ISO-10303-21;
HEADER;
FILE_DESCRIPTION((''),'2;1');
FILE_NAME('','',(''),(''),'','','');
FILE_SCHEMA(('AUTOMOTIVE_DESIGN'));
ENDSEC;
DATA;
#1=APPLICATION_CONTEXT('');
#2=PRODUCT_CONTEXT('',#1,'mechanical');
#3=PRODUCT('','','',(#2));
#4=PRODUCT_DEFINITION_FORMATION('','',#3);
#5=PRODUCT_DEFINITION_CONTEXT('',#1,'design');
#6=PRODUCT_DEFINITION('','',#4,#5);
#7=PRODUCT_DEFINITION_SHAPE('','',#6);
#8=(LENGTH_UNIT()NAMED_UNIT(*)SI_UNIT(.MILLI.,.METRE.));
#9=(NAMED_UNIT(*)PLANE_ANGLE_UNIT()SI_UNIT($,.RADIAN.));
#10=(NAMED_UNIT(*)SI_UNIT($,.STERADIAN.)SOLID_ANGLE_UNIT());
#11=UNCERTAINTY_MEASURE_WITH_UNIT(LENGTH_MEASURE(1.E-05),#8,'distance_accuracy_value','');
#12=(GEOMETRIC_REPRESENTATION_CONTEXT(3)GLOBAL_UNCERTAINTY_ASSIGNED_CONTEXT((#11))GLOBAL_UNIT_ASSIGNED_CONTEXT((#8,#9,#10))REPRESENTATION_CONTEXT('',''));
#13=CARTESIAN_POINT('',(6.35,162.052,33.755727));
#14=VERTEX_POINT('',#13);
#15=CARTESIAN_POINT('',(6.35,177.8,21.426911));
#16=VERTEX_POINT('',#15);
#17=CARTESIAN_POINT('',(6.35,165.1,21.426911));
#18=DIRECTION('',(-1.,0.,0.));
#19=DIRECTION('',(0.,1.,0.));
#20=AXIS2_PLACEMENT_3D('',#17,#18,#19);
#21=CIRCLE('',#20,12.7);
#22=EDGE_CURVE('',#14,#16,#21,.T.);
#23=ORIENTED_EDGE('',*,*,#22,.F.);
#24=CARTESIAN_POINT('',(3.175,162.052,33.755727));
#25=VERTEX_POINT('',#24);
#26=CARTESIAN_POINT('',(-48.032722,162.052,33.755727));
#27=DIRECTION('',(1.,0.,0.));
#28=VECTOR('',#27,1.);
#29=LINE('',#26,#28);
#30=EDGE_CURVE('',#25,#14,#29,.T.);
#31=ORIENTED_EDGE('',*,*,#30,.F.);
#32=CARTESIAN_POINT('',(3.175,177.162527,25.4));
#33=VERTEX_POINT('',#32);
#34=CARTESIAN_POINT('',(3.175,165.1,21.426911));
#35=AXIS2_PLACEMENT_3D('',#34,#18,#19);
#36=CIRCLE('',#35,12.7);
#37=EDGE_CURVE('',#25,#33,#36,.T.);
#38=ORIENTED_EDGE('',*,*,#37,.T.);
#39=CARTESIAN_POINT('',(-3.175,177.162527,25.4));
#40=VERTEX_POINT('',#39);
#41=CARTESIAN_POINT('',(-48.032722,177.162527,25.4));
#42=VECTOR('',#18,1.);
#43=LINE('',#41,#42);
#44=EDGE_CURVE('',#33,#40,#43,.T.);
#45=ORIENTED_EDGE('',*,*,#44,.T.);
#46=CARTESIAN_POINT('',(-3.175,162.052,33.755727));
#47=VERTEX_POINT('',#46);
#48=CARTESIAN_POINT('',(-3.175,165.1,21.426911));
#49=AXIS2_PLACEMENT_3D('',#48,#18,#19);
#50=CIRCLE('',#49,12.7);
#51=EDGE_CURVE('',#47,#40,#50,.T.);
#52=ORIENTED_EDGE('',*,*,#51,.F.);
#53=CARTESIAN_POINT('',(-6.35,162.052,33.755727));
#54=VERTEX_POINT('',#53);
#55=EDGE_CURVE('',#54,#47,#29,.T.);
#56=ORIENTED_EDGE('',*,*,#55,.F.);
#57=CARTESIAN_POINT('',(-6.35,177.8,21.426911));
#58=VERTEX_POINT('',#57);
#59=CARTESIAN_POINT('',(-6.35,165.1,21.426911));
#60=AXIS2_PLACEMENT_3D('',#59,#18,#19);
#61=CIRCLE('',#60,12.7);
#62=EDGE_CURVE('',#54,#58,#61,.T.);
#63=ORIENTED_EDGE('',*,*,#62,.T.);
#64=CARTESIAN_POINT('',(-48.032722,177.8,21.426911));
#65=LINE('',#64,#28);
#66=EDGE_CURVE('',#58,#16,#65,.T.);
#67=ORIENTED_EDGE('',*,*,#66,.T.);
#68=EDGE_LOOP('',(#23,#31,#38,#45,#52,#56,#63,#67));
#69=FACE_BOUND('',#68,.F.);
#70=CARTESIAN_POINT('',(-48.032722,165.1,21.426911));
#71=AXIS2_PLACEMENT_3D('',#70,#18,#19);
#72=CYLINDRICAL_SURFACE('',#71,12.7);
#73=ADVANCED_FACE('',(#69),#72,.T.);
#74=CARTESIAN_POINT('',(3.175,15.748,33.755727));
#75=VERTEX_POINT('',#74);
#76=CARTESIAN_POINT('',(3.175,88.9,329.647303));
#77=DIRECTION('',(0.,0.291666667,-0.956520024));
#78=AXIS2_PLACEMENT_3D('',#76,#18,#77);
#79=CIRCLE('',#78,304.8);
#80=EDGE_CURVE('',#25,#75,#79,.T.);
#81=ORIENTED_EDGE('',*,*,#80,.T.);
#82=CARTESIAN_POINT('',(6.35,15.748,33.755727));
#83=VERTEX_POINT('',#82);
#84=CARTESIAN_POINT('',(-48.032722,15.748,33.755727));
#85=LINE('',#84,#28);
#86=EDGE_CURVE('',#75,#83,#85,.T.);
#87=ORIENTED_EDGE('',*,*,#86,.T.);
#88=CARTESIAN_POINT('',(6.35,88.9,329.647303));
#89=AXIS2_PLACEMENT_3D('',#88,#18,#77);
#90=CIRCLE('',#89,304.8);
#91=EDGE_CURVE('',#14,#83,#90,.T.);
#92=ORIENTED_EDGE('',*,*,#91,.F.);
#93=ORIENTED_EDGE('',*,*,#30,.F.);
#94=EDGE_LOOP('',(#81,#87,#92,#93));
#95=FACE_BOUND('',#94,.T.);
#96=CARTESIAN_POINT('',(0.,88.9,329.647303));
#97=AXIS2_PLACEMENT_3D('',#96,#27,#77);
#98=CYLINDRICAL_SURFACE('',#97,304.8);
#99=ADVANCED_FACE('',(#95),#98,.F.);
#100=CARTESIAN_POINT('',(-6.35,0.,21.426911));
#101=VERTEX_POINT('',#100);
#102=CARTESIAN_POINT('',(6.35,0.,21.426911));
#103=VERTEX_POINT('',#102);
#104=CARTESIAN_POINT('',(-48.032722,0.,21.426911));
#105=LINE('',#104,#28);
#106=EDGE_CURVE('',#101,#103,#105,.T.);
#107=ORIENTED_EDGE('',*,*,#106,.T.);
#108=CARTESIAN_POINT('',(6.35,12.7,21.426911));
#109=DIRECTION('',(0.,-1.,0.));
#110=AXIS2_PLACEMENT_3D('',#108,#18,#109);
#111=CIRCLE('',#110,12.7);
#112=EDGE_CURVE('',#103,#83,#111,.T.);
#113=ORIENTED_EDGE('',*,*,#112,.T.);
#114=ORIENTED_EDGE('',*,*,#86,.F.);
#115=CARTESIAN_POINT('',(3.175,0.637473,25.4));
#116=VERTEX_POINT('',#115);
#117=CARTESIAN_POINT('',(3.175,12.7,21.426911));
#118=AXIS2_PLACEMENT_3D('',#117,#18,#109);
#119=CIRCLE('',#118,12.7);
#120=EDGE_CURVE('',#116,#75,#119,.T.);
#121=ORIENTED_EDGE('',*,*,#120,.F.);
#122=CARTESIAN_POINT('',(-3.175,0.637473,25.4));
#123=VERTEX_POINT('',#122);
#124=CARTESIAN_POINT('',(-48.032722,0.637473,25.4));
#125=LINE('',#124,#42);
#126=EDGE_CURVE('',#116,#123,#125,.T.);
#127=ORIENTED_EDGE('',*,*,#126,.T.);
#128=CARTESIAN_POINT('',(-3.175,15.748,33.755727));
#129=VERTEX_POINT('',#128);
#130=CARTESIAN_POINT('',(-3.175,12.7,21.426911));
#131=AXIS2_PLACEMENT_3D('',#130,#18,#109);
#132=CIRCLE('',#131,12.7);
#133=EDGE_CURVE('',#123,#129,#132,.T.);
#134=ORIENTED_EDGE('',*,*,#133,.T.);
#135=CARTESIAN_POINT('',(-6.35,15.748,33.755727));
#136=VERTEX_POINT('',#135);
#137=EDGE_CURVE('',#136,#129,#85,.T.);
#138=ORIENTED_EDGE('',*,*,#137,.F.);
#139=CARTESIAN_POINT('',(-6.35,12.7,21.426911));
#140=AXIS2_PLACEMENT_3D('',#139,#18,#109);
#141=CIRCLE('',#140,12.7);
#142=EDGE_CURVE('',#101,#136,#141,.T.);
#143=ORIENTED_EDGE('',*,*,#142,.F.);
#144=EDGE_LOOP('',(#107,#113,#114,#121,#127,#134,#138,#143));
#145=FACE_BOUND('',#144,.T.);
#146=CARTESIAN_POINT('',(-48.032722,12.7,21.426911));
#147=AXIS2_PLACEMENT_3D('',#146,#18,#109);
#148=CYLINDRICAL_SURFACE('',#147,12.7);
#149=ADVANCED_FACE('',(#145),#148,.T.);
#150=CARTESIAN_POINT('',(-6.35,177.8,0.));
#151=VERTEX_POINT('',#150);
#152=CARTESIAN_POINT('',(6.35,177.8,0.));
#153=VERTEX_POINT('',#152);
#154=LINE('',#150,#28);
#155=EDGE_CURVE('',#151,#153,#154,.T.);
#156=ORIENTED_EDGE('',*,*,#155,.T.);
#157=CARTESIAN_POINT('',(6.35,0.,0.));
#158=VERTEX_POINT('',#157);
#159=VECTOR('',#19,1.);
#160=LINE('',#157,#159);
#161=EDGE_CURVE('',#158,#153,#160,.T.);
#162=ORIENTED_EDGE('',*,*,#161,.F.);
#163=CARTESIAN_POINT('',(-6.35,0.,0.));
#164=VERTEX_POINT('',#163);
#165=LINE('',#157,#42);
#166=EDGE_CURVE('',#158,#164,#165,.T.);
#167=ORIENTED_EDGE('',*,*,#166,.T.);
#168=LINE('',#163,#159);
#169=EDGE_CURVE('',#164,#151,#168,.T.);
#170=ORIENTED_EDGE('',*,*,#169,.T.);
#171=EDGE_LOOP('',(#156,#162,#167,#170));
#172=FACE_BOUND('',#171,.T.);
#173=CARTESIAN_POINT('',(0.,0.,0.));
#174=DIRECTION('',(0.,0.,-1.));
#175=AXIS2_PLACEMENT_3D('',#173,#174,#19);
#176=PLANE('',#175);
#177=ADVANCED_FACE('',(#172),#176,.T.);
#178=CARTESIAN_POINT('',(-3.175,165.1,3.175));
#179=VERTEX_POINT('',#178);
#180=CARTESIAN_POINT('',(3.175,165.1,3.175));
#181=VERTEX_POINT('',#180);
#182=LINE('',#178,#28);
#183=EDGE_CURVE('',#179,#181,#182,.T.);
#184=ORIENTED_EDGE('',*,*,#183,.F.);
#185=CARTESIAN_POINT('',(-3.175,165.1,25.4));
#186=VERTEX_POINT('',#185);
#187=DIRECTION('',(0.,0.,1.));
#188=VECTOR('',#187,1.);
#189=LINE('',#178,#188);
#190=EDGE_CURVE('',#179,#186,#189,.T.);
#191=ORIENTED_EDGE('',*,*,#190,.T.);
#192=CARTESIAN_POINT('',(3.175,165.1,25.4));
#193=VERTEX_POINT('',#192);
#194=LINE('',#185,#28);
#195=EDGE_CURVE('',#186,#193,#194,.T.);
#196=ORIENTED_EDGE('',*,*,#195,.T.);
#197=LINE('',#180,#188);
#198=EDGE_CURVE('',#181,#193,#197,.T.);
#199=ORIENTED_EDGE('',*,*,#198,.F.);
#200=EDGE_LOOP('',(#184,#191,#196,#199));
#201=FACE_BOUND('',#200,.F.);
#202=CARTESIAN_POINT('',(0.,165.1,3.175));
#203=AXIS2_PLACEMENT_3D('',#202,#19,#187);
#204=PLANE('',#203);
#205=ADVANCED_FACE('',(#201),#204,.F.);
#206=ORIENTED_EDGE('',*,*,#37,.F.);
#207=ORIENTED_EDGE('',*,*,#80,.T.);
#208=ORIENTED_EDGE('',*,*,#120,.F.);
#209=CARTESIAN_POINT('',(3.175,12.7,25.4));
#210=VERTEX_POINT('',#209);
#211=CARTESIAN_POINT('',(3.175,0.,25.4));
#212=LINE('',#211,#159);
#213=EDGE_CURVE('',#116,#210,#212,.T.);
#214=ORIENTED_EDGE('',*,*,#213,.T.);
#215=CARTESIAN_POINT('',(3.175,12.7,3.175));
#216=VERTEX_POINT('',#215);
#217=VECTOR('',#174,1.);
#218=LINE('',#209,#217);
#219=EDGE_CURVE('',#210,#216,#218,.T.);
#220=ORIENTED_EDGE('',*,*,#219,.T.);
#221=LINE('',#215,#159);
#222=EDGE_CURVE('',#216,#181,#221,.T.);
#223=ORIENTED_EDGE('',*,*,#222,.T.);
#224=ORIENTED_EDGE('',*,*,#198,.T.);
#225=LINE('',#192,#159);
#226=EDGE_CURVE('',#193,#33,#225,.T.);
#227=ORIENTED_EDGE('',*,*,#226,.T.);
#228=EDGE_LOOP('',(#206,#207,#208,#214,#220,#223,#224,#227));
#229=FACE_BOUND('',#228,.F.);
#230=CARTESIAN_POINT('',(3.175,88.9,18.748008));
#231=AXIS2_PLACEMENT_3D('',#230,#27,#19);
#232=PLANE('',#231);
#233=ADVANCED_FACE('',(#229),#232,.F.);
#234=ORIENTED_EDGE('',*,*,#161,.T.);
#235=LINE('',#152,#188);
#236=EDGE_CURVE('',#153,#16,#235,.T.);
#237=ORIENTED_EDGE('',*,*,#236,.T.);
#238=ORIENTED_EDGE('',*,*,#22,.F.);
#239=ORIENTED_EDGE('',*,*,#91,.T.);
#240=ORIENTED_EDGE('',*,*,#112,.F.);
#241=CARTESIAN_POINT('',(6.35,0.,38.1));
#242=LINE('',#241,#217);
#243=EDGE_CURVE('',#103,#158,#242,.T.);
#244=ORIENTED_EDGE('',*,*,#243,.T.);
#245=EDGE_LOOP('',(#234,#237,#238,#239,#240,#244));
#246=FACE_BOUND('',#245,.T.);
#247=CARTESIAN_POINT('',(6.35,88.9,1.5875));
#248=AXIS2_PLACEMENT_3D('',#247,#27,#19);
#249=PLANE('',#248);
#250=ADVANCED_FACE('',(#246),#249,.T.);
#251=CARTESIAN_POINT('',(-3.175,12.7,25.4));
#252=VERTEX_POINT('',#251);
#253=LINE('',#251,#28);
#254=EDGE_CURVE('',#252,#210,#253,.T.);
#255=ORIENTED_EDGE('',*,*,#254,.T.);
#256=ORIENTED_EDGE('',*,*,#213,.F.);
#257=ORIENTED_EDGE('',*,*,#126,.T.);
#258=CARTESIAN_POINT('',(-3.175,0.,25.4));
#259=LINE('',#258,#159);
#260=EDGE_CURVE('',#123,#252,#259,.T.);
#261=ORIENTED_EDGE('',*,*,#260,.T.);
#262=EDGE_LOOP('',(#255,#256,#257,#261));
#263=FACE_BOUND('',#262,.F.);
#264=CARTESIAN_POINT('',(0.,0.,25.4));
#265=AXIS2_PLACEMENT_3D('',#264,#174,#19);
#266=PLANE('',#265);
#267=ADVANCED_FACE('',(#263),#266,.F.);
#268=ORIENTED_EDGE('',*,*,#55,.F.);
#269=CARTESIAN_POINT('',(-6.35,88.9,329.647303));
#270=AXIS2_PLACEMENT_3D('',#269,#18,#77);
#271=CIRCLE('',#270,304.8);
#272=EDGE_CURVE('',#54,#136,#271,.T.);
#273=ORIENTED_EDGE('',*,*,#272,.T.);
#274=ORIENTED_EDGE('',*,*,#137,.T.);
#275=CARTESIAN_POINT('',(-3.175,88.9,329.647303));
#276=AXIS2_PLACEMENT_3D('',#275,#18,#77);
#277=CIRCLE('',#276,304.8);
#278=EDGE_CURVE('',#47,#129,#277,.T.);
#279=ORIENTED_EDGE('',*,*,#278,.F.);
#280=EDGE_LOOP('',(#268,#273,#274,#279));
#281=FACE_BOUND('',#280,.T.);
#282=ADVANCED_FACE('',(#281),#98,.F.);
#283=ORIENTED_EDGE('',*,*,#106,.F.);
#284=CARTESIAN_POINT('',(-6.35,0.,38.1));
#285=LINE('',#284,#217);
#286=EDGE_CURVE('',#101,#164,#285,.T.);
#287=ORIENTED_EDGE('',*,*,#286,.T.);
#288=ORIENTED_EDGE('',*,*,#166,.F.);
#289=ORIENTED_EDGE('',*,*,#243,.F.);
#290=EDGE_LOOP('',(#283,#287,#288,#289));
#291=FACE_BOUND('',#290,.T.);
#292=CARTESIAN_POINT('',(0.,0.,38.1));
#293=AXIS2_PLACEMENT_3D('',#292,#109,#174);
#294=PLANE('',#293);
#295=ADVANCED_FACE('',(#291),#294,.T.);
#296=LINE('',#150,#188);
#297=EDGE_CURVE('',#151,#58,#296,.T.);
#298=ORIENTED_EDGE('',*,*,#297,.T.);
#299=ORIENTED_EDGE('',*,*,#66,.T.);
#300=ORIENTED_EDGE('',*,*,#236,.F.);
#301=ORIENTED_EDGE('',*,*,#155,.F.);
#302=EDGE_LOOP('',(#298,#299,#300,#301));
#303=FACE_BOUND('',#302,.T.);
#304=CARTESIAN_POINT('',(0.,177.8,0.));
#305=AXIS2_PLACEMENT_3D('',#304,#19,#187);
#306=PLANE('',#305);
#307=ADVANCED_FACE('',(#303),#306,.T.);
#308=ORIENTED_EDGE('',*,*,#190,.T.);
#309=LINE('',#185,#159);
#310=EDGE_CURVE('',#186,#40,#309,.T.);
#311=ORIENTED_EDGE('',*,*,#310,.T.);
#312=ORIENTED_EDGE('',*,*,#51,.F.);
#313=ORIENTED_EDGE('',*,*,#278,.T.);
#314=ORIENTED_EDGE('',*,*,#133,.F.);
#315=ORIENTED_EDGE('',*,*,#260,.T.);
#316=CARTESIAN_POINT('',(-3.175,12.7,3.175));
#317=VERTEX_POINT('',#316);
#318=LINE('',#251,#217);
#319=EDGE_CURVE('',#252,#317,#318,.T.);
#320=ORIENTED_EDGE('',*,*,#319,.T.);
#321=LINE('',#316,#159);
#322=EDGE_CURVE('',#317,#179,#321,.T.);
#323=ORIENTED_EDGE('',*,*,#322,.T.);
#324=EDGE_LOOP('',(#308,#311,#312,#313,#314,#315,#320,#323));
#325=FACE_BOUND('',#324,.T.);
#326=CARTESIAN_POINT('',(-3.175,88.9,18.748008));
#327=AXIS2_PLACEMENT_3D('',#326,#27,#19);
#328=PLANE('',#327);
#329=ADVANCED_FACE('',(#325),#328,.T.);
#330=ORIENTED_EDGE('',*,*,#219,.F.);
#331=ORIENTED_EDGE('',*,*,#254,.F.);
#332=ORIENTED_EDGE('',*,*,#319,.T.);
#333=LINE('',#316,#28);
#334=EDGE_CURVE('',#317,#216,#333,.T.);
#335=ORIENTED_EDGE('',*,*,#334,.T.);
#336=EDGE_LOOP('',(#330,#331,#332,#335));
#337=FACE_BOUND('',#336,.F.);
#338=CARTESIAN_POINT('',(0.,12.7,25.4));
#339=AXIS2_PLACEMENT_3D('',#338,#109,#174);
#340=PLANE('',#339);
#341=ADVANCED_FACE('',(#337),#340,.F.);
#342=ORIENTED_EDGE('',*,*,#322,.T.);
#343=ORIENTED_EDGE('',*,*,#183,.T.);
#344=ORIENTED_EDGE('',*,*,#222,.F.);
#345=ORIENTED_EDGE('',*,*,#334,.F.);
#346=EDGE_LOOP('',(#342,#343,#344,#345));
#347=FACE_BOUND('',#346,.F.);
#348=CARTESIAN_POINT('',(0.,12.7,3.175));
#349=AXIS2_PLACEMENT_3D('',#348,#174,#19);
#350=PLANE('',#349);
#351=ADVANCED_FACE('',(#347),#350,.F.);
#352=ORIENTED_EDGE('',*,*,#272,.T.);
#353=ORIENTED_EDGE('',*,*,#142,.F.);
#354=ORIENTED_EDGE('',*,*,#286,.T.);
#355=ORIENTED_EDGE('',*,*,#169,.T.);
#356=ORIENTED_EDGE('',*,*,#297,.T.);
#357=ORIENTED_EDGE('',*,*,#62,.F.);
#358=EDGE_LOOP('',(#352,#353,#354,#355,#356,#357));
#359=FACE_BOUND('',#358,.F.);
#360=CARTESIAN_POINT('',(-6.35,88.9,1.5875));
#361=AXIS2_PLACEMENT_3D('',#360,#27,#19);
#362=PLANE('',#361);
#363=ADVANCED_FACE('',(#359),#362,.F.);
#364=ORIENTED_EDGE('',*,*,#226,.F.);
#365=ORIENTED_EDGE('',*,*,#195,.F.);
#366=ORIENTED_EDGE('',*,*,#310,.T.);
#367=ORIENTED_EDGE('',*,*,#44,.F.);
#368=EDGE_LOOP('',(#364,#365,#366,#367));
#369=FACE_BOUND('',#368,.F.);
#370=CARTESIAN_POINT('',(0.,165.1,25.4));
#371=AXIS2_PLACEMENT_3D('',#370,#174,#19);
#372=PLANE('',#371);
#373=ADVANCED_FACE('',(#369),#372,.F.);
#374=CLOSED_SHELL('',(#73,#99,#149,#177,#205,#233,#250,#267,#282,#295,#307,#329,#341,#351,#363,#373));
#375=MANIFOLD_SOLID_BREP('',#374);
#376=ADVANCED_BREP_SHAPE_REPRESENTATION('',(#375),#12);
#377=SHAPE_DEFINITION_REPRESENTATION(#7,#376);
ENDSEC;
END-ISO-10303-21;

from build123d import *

# Parameters (mm, degrees)
F0_W        = 152.4
F0_H        = 3.175
F1_DEPTH    = 6.35
F2_DEPTH    = 3.175
F3_T1_DEPTH = 86.5404436654
F3_T3_DEPTH = 86.5404436654


# Not quite as in the source:
# - a fillet or chamfer that OpenCascade refuses, or shapes differently, is made with other operations: its cross-section is extruded or revolved along the edge and cut away or added


with BuildPart() as f1:
    # F0 (on Right) → F1 (new body, symmetric)
    with BuildSketch(Plane.YZ):
        with Locations((88.9, 1.5875)):
            Rectangle(F0_W, F0_H)
        Polygon((0, 25.4), (0, 0), (12.7, 0), (12.7, 3.175), (12.7, 25.4), align=None)
        Polygon((165.1, 3.175), (165.1, 0), (177.8, 0), (177.8, 25.4), (165.1, 25.4), align=None)
        with BuildLine():
            Line((0, 38.1), (0, 25.4))
            Line((0, 25.4), (12.7, 25.4))
            Line((12.7, 25.4), (12.7, 3.175))
            Line((12.7, 3.175), (165.1, 3.175))
            Line((165.1, 3.175), (165.1, 25.4))
            Line((165.1, 25.4), (177.8, 25.4))
            Line((177.8, 25.4), (177.8, 38.1))
            ThreePointArc((177.8, 38.1), (88.9, 24.8473031945), (0, 38.1))
        make_face()
    extrude(amount=F1_DEPTH, both=True)

    # F0 (on Right) → F2 (cut, symmetric)
    with BuildSketch(Plane.YZ):
        with BuildLine():
            Line((0, 38.1), (0, 25.4))
            Line((0, 25.4), (12.7, 25.4))
            Line((12.7, 25.4), (12.7, 3.175))
            Line((12.7, 3.175), (165.1, 3.175))
            Line((165.1, 3.175), (165.1, 25.4))
            Line((165.1, 25.4), (177.8, 25.4))
            Line((177.8, 25.4), (177.8, 38.1))
            ThreePointArc((177.8, 38.1), (88.9, 24.8473031945), (0, 38.1))
        make_face()
    extrude(amount=F2_DEPTH, both=True, mode=Mode.SUBTRACT)

    # F3: fillet of radius 12.7 on 4 edges, made by hand

    # F3_s2 → F3_t1 (cut)
    with BuildSketch(Plane.YZ.offset(-48.0327218327)):
        with BuildLine():
            ThreePointArc((0, 21.4269112669), (4.8711942162, 31.4269012669), (15.748, 33.755726944))
            ThreePointArc((15.748, 33.755726944), (7.8448900248, 35.8223397437), (0, 38.1))
            Line((0, 38.1), (0, 21.4269112669))
        make_face()
        with BuildLine():
            ThreePointArc((177.8, 21.4269112669), (172.9288057838, 31.4269012669), (162.052, 33.755726944))
            ThreePointArc((162.052, 33.755726944), (169.9551099752, 35.8223397437), (177.8, 38.1))
            Line((177.8, 38.1), (177.8, 21.4269112669))
        make_face()
    extrude(amount=F3_T1_DEPTH, mode=Mode.SUBTRACT)

    # F3_s4 → F3_t3 (cut)
    with BuildSketch(Plane.YZ.offset(-38.5077218327)):
        with BuildLine():
            ThreePointArc((0, 21.4269112669), (4.8711942162, 31.4269012669), (15.748, 33.755726944))
            ThreePointArc((15.748, 33.755726944), (7.8448900248, 35.8223397437), (0, 38.1))
            Line((0, 38.1), (0, 21.4269112669))
        make_face()
        with BuildLine():
            ThreePointArc((177.8, 21.4269112669), (172.9288057838, 31.4269012669), (162.052, 33.755726944))
            ThreePointArc((162.052, 33.755726944), (169.9551099752, 35.8223397437), (177.8, 38.1))
            Line((177.8, 38.1), (177.8, 21.4269112669))
        make_face()
    extrude(amount=F3_T3_DEPTH, mode=Mode.SUBTRACT)


solid = f1.part
